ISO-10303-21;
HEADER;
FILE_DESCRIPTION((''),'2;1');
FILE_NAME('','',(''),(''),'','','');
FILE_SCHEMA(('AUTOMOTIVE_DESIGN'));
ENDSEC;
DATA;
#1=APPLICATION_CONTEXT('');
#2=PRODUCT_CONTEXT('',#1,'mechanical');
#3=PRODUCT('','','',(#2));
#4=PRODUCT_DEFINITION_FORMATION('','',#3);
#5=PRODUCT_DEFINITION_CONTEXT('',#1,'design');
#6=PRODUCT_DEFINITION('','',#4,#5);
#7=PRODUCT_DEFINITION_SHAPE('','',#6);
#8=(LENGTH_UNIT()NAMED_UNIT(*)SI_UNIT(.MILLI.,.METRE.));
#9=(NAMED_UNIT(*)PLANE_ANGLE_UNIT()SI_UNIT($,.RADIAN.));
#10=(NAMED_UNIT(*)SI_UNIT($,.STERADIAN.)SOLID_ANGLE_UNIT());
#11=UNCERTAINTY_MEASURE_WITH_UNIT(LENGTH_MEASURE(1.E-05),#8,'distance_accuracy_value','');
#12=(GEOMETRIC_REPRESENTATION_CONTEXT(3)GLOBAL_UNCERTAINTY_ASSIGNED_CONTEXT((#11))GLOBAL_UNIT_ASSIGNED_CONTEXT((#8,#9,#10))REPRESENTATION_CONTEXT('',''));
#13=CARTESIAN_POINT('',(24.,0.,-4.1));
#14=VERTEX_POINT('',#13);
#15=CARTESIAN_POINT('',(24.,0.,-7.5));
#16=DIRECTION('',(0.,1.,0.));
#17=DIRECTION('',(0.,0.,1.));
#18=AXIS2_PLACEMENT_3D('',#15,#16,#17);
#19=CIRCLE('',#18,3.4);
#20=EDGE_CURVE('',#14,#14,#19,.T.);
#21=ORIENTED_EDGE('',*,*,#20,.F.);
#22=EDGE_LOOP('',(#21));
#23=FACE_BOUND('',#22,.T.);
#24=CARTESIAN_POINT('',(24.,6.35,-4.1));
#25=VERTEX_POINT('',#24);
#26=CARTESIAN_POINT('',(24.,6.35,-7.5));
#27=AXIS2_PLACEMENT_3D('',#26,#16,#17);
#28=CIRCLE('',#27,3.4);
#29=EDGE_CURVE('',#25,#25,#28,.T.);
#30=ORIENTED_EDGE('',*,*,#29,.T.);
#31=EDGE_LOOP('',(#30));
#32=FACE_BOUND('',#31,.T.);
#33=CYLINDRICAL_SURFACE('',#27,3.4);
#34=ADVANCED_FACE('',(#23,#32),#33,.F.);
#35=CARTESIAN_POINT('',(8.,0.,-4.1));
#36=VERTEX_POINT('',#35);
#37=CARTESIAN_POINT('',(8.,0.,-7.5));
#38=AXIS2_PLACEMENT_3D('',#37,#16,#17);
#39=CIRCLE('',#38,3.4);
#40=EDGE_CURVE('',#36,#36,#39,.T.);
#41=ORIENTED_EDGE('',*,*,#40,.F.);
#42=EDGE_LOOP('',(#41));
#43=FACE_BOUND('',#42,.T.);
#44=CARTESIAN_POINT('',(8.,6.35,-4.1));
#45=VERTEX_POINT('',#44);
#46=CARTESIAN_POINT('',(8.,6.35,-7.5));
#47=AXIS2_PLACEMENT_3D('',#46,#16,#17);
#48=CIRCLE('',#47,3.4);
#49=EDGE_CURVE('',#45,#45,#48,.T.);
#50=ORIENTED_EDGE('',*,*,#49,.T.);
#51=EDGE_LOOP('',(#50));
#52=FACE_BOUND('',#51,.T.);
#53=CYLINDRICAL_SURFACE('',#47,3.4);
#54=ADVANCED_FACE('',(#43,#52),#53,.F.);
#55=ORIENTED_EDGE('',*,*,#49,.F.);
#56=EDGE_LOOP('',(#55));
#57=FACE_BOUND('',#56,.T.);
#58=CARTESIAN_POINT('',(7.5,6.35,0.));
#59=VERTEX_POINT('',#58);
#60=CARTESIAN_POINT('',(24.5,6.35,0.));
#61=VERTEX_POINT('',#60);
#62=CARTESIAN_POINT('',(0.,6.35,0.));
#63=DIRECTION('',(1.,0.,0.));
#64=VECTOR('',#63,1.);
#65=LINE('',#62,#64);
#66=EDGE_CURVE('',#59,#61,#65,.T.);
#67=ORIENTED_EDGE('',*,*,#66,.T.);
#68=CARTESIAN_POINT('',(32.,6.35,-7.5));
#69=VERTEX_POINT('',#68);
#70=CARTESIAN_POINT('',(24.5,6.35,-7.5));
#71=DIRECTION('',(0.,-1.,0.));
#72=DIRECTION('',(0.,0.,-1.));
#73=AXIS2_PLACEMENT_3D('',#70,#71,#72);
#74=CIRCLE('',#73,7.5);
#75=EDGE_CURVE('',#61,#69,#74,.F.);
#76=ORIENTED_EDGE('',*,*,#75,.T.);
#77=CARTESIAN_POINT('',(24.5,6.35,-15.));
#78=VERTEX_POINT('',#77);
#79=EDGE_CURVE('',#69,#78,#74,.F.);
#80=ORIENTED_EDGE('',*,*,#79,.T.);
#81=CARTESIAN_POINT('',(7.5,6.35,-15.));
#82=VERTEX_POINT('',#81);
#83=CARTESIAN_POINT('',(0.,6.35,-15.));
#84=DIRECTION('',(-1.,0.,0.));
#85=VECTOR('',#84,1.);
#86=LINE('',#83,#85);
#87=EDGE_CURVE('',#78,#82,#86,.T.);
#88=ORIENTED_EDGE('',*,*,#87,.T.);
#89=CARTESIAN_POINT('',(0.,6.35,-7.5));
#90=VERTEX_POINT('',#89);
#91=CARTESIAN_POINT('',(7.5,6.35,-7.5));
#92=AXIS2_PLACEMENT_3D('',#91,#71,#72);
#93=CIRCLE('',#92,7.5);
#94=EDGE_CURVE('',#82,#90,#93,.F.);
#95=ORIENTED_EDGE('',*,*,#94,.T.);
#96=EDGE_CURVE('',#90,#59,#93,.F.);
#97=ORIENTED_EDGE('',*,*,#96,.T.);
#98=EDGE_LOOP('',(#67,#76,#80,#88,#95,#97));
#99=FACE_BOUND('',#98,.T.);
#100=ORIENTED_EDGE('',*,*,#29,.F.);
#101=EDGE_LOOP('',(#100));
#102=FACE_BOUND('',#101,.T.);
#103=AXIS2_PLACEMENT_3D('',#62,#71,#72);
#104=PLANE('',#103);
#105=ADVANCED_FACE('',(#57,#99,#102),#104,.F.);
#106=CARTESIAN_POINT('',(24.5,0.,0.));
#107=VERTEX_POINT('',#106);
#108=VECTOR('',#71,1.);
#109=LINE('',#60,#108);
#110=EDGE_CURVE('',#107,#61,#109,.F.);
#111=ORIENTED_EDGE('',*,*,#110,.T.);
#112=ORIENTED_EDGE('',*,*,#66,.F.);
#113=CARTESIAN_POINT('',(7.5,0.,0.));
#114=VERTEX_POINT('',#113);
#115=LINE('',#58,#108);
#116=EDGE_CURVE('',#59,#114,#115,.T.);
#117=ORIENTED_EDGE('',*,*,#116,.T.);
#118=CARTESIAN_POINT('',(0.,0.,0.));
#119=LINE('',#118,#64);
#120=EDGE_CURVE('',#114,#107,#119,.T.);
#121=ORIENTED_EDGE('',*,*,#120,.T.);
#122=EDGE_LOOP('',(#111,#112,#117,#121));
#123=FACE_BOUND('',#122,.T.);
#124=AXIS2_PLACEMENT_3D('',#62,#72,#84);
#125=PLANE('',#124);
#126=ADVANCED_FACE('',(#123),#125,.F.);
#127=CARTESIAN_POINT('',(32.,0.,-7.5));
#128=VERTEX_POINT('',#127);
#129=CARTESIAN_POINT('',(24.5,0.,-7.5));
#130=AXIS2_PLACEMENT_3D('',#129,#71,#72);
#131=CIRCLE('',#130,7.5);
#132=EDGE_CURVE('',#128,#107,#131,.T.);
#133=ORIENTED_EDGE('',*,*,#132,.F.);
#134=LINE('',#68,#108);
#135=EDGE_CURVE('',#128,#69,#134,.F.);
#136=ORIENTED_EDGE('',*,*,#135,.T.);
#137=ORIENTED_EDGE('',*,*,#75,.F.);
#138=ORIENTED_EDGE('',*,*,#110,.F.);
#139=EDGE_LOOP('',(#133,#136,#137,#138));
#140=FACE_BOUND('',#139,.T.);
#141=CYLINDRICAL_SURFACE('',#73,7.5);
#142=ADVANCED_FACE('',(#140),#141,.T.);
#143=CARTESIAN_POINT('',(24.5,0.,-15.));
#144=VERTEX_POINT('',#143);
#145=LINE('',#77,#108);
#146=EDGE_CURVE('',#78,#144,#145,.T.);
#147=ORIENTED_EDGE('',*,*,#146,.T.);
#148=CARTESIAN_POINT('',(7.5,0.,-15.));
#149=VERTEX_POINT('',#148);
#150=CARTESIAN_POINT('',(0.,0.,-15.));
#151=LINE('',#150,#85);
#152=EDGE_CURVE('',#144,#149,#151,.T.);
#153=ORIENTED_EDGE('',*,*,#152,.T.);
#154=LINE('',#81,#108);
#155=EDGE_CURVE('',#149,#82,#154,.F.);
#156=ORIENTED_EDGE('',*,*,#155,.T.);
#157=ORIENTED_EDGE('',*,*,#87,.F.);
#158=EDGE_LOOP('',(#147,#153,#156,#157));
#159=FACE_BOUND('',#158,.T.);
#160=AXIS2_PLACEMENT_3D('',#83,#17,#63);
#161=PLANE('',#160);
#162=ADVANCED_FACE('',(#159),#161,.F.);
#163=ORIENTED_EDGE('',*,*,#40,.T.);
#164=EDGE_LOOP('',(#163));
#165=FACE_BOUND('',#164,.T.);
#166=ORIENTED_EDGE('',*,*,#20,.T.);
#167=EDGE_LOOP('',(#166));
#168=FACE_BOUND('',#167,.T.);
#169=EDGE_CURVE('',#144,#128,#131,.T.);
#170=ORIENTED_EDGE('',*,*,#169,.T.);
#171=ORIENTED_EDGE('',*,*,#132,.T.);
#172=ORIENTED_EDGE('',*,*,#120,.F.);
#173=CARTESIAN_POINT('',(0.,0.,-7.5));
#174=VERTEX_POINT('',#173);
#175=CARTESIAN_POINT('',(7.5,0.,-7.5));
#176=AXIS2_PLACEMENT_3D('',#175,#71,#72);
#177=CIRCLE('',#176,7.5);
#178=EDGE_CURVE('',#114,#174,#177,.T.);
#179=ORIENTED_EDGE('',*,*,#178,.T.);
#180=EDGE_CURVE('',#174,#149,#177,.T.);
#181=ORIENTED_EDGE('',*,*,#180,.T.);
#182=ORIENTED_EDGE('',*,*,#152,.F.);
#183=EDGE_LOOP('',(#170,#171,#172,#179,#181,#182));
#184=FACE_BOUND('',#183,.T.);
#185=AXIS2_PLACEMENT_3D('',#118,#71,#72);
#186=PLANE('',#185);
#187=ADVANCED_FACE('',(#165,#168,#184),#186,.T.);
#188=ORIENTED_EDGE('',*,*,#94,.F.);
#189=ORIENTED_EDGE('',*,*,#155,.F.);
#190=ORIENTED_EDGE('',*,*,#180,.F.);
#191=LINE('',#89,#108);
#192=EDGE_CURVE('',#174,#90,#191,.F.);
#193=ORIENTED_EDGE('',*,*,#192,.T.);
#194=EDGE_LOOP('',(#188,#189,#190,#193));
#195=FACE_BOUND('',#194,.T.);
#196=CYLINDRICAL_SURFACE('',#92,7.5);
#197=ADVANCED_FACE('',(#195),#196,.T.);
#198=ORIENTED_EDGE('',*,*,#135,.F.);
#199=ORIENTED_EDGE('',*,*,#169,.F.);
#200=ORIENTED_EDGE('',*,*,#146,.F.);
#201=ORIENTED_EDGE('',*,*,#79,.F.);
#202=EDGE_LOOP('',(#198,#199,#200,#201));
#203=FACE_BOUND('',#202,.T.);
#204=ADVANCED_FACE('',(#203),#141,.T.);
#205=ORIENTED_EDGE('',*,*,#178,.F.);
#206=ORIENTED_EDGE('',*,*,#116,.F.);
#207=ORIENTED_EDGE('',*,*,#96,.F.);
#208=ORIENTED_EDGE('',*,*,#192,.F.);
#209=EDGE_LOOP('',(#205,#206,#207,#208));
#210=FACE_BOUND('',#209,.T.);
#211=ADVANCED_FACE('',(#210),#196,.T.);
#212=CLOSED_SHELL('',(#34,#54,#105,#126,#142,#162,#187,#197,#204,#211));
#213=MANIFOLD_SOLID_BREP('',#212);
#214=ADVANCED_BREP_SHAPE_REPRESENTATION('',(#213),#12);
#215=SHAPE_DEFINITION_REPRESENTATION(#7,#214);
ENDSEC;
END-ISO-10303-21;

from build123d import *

# Parameters (mm, degrees)
SKETCH2_W                    = 32
SKETCH2_H                    = 15
BOSS_EXTRUDE1_DEPTH          = 6.35
TAP_DRILL_FOR_M8X1_25_TAP1_D = 6.8
FILLET1_R                    = 7.5


with BuildPart() as part:
    # Sketch2 → Boss-Extrude1 (new body)
    with BuildSketch(Plane(origin=(0, 0, 0), x_dir=(1, 0, 0), z_dir=(0, 1, 0))):
        with Locations((16, 7.5)):
            Rectangle(SKETCH2_W, SKETCH2_H)
    extrude(amount=BOSS_EXTRUDE1_DEPTH)

    # Tap Drill for M8x1.25 Tap1 (through all)
    with Locations(Plane(origin=(8, 6.35, -7.5), x_dir=(0, 0, 1), z_dir=(0, 1, 0))):
        with Locations((0, 0), (0, 16)):
            Hole(TAP_DRILL_FOR_M8X1_25_TAP1_D / 2)

    # Fillet1
    fillet1_edges = [part.edges().sort_by_distance(p)[0] for p in [
        (32, 3.175, 0),
        (32, 3.175, -15),
        (0, 3.175, -15),
        (0, 3.175, 0),
    ]]
    fillet(fillet1_edges, radius=FILLET1_R - 0.0001)  # a hair under: the kernel refuses the full size


solid = part.part
